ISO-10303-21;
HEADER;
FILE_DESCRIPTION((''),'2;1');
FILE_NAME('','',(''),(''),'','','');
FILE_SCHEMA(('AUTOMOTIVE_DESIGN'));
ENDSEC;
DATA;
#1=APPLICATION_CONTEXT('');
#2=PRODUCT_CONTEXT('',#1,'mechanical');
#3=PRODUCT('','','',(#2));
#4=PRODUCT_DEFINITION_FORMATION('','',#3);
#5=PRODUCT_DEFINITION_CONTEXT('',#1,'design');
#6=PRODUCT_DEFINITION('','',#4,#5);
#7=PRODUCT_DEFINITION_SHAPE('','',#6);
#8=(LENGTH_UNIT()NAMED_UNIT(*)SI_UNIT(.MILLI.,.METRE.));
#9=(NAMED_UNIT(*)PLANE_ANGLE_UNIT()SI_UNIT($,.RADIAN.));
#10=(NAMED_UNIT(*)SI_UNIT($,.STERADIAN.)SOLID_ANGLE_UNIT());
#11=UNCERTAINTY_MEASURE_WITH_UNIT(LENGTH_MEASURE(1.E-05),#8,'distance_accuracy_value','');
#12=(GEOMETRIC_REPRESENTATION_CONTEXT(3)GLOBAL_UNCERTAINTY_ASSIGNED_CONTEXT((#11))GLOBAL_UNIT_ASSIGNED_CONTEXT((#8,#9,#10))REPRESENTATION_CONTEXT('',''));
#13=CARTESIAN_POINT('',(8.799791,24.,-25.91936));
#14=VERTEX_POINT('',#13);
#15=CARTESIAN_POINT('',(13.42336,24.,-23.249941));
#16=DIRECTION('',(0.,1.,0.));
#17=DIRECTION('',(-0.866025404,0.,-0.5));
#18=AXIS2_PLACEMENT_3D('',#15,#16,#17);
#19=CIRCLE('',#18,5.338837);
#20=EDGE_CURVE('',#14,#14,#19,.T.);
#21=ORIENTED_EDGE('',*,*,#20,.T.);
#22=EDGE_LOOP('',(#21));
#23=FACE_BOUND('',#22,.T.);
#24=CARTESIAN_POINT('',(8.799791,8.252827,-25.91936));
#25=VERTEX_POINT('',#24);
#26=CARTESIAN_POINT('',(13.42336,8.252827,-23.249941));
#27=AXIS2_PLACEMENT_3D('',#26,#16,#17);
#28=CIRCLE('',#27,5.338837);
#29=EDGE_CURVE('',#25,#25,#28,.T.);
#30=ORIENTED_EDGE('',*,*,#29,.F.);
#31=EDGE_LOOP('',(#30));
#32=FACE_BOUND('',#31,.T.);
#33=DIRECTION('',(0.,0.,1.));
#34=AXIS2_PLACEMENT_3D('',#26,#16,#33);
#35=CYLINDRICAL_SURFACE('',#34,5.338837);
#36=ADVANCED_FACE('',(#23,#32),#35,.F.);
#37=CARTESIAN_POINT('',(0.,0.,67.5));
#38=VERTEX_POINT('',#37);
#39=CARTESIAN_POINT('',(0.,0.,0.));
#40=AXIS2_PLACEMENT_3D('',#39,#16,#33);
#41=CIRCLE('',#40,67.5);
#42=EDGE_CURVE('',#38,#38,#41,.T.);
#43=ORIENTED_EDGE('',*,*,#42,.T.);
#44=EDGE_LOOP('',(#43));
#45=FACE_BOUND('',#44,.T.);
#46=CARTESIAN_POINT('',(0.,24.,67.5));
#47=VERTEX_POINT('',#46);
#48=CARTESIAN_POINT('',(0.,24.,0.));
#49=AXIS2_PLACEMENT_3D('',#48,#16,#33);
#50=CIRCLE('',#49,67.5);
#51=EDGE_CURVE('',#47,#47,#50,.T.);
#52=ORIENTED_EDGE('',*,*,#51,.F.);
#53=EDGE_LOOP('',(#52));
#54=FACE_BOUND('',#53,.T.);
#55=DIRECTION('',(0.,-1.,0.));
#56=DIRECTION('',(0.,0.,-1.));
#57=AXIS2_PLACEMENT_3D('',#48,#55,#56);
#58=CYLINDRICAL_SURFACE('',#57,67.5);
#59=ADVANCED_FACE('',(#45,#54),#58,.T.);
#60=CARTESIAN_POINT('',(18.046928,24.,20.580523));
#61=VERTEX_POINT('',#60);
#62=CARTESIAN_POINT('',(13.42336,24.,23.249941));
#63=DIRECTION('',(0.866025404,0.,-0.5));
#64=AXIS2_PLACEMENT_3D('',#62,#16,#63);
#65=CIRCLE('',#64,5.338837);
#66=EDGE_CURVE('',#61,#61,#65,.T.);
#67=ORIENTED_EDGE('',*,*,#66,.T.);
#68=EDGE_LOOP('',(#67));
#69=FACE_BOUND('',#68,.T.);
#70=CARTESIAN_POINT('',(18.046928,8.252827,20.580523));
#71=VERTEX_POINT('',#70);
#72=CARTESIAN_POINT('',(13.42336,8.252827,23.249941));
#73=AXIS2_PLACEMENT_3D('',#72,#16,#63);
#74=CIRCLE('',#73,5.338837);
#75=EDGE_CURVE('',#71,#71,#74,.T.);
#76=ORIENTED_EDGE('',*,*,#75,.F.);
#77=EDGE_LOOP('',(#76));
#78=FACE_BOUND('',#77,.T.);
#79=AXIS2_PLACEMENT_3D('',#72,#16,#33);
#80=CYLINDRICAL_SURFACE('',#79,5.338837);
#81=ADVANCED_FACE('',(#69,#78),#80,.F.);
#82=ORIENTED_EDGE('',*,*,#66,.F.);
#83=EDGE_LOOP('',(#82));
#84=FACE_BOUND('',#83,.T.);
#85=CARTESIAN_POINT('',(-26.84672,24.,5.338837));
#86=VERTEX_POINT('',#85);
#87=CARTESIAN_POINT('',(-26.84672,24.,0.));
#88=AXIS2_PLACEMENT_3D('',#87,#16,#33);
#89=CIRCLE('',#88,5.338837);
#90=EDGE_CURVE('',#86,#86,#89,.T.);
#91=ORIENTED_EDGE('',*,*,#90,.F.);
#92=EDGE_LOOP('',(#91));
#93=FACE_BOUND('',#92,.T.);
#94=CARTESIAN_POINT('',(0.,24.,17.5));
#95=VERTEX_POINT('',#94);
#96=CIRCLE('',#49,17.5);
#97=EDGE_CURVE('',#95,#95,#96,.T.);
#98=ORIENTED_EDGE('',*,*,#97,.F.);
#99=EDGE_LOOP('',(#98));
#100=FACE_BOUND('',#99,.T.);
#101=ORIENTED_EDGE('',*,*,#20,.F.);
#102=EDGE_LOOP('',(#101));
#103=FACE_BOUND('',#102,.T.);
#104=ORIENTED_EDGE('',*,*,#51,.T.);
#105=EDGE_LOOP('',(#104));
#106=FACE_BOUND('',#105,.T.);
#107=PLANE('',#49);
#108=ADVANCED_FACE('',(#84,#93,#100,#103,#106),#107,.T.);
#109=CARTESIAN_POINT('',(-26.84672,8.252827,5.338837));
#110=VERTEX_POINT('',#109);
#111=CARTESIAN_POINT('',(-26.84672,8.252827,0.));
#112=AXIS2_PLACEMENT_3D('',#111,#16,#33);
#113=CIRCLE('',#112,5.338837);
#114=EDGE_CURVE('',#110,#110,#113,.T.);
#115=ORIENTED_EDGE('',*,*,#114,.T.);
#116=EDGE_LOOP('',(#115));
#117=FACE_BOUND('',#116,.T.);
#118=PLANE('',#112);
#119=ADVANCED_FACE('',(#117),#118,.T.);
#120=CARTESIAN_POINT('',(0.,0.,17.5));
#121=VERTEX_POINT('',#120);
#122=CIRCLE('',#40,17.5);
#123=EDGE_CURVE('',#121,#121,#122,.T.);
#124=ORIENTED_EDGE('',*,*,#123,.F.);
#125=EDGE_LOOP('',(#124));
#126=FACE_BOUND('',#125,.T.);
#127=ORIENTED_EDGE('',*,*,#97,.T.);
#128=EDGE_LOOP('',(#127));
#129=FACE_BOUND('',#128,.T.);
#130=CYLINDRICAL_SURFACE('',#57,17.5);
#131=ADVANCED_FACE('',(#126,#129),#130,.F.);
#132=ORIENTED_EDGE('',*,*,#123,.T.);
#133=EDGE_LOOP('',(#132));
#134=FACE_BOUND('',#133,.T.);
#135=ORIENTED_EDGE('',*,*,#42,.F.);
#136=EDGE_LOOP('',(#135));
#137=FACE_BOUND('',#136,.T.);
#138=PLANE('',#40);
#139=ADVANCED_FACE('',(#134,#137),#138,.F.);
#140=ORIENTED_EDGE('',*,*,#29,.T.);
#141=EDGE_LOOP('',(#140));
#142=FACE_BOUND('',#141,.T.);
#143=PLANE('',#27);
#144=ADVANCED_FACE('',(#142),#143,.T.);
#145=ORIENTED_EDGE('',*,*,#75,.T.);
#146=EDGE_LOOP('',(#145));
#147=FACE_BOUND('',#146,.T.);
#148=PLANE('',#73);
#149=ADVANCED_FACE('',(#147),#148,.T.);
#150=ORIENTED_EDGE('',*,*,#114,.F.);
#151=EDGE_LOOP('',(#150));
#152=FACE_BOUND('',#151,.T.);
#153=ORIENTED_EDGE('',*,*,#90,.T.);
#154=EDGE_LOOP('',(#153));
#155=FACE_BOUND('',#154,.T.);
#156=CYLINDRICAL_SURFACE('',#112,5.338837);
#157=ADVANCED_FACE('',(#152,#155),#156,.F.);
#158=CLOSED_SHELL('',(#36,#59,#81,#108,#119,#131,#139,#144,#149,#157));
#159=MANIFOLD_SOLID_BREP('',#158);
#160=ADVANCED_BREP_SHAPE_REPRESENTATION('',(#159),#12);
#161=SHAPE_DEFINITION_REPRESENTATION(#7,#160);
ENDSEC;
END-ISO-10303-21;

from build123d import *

# Parameters (mm, degrees)
SKETCH1_R           = 67.5
BOSS_EXTRUDE1_DEPTH = 24
SKETCH2_R           = 17.5
CUT_EXTRUDE1_DEPTH  = 99.430178299
SKETCH3_R           = 5.338837042
CUT_EXTRUDE2_DEPTH  = 15.747173094
CIRPATTERN1_COUNT   = 3


with BuildPart() as part:
    # Sketch1 → Boss-Extrude1 (new body)
    with BuildSketch(Plane(origin=(0, 0, 0), x_dir=(1, 0, 0), z_dir=(0, 1, 0))):
        Circle(SKETCH1_R)
    extrude(amount=BOSS_EXTRUDE1_DEPTH)

    # Sketch2 → Cut-Extrude1 (cut, through all)
    with BuildSketch(Plane(origin=(0, 0, 0), x_dir=(1, 0, 0), z_dir=(0, 1, 0))):
        Circle(SKETCH2_R)
    extrude(amount=CUT_EXTRUDE1_DEPTH, mode=Mode.SUBTRACT)

    # Sketch3 → Cut-Extrude2 (cut)
    with BuildSketch(Plane(origin=(0, 24, 0), x_dir=(1, 0, 0), z_dir=(0, 1, 0))):
        with Locations((-26.846719931, 0)):
            Circle(SKETCH3_R)
    cut_extrude2 = extrude(amount=-CUT_EXTRUDE2_DEPTH, mode=Mode.SUBTRACT)

    # CirPattern1: Cut-Extrude2 ×3 about axis
    cirpattern1_axis = Axis((0, 0, 0), (0, 1, 0))
    for i in range(1, CIRPATTERN1_COUNT):
        add(cut_extrude2.rotate(cirpattern1_axis, i * 360 / CIRPATTERN1_COUNT), mode=Mode.SUBTRACT)


solid = part.part
